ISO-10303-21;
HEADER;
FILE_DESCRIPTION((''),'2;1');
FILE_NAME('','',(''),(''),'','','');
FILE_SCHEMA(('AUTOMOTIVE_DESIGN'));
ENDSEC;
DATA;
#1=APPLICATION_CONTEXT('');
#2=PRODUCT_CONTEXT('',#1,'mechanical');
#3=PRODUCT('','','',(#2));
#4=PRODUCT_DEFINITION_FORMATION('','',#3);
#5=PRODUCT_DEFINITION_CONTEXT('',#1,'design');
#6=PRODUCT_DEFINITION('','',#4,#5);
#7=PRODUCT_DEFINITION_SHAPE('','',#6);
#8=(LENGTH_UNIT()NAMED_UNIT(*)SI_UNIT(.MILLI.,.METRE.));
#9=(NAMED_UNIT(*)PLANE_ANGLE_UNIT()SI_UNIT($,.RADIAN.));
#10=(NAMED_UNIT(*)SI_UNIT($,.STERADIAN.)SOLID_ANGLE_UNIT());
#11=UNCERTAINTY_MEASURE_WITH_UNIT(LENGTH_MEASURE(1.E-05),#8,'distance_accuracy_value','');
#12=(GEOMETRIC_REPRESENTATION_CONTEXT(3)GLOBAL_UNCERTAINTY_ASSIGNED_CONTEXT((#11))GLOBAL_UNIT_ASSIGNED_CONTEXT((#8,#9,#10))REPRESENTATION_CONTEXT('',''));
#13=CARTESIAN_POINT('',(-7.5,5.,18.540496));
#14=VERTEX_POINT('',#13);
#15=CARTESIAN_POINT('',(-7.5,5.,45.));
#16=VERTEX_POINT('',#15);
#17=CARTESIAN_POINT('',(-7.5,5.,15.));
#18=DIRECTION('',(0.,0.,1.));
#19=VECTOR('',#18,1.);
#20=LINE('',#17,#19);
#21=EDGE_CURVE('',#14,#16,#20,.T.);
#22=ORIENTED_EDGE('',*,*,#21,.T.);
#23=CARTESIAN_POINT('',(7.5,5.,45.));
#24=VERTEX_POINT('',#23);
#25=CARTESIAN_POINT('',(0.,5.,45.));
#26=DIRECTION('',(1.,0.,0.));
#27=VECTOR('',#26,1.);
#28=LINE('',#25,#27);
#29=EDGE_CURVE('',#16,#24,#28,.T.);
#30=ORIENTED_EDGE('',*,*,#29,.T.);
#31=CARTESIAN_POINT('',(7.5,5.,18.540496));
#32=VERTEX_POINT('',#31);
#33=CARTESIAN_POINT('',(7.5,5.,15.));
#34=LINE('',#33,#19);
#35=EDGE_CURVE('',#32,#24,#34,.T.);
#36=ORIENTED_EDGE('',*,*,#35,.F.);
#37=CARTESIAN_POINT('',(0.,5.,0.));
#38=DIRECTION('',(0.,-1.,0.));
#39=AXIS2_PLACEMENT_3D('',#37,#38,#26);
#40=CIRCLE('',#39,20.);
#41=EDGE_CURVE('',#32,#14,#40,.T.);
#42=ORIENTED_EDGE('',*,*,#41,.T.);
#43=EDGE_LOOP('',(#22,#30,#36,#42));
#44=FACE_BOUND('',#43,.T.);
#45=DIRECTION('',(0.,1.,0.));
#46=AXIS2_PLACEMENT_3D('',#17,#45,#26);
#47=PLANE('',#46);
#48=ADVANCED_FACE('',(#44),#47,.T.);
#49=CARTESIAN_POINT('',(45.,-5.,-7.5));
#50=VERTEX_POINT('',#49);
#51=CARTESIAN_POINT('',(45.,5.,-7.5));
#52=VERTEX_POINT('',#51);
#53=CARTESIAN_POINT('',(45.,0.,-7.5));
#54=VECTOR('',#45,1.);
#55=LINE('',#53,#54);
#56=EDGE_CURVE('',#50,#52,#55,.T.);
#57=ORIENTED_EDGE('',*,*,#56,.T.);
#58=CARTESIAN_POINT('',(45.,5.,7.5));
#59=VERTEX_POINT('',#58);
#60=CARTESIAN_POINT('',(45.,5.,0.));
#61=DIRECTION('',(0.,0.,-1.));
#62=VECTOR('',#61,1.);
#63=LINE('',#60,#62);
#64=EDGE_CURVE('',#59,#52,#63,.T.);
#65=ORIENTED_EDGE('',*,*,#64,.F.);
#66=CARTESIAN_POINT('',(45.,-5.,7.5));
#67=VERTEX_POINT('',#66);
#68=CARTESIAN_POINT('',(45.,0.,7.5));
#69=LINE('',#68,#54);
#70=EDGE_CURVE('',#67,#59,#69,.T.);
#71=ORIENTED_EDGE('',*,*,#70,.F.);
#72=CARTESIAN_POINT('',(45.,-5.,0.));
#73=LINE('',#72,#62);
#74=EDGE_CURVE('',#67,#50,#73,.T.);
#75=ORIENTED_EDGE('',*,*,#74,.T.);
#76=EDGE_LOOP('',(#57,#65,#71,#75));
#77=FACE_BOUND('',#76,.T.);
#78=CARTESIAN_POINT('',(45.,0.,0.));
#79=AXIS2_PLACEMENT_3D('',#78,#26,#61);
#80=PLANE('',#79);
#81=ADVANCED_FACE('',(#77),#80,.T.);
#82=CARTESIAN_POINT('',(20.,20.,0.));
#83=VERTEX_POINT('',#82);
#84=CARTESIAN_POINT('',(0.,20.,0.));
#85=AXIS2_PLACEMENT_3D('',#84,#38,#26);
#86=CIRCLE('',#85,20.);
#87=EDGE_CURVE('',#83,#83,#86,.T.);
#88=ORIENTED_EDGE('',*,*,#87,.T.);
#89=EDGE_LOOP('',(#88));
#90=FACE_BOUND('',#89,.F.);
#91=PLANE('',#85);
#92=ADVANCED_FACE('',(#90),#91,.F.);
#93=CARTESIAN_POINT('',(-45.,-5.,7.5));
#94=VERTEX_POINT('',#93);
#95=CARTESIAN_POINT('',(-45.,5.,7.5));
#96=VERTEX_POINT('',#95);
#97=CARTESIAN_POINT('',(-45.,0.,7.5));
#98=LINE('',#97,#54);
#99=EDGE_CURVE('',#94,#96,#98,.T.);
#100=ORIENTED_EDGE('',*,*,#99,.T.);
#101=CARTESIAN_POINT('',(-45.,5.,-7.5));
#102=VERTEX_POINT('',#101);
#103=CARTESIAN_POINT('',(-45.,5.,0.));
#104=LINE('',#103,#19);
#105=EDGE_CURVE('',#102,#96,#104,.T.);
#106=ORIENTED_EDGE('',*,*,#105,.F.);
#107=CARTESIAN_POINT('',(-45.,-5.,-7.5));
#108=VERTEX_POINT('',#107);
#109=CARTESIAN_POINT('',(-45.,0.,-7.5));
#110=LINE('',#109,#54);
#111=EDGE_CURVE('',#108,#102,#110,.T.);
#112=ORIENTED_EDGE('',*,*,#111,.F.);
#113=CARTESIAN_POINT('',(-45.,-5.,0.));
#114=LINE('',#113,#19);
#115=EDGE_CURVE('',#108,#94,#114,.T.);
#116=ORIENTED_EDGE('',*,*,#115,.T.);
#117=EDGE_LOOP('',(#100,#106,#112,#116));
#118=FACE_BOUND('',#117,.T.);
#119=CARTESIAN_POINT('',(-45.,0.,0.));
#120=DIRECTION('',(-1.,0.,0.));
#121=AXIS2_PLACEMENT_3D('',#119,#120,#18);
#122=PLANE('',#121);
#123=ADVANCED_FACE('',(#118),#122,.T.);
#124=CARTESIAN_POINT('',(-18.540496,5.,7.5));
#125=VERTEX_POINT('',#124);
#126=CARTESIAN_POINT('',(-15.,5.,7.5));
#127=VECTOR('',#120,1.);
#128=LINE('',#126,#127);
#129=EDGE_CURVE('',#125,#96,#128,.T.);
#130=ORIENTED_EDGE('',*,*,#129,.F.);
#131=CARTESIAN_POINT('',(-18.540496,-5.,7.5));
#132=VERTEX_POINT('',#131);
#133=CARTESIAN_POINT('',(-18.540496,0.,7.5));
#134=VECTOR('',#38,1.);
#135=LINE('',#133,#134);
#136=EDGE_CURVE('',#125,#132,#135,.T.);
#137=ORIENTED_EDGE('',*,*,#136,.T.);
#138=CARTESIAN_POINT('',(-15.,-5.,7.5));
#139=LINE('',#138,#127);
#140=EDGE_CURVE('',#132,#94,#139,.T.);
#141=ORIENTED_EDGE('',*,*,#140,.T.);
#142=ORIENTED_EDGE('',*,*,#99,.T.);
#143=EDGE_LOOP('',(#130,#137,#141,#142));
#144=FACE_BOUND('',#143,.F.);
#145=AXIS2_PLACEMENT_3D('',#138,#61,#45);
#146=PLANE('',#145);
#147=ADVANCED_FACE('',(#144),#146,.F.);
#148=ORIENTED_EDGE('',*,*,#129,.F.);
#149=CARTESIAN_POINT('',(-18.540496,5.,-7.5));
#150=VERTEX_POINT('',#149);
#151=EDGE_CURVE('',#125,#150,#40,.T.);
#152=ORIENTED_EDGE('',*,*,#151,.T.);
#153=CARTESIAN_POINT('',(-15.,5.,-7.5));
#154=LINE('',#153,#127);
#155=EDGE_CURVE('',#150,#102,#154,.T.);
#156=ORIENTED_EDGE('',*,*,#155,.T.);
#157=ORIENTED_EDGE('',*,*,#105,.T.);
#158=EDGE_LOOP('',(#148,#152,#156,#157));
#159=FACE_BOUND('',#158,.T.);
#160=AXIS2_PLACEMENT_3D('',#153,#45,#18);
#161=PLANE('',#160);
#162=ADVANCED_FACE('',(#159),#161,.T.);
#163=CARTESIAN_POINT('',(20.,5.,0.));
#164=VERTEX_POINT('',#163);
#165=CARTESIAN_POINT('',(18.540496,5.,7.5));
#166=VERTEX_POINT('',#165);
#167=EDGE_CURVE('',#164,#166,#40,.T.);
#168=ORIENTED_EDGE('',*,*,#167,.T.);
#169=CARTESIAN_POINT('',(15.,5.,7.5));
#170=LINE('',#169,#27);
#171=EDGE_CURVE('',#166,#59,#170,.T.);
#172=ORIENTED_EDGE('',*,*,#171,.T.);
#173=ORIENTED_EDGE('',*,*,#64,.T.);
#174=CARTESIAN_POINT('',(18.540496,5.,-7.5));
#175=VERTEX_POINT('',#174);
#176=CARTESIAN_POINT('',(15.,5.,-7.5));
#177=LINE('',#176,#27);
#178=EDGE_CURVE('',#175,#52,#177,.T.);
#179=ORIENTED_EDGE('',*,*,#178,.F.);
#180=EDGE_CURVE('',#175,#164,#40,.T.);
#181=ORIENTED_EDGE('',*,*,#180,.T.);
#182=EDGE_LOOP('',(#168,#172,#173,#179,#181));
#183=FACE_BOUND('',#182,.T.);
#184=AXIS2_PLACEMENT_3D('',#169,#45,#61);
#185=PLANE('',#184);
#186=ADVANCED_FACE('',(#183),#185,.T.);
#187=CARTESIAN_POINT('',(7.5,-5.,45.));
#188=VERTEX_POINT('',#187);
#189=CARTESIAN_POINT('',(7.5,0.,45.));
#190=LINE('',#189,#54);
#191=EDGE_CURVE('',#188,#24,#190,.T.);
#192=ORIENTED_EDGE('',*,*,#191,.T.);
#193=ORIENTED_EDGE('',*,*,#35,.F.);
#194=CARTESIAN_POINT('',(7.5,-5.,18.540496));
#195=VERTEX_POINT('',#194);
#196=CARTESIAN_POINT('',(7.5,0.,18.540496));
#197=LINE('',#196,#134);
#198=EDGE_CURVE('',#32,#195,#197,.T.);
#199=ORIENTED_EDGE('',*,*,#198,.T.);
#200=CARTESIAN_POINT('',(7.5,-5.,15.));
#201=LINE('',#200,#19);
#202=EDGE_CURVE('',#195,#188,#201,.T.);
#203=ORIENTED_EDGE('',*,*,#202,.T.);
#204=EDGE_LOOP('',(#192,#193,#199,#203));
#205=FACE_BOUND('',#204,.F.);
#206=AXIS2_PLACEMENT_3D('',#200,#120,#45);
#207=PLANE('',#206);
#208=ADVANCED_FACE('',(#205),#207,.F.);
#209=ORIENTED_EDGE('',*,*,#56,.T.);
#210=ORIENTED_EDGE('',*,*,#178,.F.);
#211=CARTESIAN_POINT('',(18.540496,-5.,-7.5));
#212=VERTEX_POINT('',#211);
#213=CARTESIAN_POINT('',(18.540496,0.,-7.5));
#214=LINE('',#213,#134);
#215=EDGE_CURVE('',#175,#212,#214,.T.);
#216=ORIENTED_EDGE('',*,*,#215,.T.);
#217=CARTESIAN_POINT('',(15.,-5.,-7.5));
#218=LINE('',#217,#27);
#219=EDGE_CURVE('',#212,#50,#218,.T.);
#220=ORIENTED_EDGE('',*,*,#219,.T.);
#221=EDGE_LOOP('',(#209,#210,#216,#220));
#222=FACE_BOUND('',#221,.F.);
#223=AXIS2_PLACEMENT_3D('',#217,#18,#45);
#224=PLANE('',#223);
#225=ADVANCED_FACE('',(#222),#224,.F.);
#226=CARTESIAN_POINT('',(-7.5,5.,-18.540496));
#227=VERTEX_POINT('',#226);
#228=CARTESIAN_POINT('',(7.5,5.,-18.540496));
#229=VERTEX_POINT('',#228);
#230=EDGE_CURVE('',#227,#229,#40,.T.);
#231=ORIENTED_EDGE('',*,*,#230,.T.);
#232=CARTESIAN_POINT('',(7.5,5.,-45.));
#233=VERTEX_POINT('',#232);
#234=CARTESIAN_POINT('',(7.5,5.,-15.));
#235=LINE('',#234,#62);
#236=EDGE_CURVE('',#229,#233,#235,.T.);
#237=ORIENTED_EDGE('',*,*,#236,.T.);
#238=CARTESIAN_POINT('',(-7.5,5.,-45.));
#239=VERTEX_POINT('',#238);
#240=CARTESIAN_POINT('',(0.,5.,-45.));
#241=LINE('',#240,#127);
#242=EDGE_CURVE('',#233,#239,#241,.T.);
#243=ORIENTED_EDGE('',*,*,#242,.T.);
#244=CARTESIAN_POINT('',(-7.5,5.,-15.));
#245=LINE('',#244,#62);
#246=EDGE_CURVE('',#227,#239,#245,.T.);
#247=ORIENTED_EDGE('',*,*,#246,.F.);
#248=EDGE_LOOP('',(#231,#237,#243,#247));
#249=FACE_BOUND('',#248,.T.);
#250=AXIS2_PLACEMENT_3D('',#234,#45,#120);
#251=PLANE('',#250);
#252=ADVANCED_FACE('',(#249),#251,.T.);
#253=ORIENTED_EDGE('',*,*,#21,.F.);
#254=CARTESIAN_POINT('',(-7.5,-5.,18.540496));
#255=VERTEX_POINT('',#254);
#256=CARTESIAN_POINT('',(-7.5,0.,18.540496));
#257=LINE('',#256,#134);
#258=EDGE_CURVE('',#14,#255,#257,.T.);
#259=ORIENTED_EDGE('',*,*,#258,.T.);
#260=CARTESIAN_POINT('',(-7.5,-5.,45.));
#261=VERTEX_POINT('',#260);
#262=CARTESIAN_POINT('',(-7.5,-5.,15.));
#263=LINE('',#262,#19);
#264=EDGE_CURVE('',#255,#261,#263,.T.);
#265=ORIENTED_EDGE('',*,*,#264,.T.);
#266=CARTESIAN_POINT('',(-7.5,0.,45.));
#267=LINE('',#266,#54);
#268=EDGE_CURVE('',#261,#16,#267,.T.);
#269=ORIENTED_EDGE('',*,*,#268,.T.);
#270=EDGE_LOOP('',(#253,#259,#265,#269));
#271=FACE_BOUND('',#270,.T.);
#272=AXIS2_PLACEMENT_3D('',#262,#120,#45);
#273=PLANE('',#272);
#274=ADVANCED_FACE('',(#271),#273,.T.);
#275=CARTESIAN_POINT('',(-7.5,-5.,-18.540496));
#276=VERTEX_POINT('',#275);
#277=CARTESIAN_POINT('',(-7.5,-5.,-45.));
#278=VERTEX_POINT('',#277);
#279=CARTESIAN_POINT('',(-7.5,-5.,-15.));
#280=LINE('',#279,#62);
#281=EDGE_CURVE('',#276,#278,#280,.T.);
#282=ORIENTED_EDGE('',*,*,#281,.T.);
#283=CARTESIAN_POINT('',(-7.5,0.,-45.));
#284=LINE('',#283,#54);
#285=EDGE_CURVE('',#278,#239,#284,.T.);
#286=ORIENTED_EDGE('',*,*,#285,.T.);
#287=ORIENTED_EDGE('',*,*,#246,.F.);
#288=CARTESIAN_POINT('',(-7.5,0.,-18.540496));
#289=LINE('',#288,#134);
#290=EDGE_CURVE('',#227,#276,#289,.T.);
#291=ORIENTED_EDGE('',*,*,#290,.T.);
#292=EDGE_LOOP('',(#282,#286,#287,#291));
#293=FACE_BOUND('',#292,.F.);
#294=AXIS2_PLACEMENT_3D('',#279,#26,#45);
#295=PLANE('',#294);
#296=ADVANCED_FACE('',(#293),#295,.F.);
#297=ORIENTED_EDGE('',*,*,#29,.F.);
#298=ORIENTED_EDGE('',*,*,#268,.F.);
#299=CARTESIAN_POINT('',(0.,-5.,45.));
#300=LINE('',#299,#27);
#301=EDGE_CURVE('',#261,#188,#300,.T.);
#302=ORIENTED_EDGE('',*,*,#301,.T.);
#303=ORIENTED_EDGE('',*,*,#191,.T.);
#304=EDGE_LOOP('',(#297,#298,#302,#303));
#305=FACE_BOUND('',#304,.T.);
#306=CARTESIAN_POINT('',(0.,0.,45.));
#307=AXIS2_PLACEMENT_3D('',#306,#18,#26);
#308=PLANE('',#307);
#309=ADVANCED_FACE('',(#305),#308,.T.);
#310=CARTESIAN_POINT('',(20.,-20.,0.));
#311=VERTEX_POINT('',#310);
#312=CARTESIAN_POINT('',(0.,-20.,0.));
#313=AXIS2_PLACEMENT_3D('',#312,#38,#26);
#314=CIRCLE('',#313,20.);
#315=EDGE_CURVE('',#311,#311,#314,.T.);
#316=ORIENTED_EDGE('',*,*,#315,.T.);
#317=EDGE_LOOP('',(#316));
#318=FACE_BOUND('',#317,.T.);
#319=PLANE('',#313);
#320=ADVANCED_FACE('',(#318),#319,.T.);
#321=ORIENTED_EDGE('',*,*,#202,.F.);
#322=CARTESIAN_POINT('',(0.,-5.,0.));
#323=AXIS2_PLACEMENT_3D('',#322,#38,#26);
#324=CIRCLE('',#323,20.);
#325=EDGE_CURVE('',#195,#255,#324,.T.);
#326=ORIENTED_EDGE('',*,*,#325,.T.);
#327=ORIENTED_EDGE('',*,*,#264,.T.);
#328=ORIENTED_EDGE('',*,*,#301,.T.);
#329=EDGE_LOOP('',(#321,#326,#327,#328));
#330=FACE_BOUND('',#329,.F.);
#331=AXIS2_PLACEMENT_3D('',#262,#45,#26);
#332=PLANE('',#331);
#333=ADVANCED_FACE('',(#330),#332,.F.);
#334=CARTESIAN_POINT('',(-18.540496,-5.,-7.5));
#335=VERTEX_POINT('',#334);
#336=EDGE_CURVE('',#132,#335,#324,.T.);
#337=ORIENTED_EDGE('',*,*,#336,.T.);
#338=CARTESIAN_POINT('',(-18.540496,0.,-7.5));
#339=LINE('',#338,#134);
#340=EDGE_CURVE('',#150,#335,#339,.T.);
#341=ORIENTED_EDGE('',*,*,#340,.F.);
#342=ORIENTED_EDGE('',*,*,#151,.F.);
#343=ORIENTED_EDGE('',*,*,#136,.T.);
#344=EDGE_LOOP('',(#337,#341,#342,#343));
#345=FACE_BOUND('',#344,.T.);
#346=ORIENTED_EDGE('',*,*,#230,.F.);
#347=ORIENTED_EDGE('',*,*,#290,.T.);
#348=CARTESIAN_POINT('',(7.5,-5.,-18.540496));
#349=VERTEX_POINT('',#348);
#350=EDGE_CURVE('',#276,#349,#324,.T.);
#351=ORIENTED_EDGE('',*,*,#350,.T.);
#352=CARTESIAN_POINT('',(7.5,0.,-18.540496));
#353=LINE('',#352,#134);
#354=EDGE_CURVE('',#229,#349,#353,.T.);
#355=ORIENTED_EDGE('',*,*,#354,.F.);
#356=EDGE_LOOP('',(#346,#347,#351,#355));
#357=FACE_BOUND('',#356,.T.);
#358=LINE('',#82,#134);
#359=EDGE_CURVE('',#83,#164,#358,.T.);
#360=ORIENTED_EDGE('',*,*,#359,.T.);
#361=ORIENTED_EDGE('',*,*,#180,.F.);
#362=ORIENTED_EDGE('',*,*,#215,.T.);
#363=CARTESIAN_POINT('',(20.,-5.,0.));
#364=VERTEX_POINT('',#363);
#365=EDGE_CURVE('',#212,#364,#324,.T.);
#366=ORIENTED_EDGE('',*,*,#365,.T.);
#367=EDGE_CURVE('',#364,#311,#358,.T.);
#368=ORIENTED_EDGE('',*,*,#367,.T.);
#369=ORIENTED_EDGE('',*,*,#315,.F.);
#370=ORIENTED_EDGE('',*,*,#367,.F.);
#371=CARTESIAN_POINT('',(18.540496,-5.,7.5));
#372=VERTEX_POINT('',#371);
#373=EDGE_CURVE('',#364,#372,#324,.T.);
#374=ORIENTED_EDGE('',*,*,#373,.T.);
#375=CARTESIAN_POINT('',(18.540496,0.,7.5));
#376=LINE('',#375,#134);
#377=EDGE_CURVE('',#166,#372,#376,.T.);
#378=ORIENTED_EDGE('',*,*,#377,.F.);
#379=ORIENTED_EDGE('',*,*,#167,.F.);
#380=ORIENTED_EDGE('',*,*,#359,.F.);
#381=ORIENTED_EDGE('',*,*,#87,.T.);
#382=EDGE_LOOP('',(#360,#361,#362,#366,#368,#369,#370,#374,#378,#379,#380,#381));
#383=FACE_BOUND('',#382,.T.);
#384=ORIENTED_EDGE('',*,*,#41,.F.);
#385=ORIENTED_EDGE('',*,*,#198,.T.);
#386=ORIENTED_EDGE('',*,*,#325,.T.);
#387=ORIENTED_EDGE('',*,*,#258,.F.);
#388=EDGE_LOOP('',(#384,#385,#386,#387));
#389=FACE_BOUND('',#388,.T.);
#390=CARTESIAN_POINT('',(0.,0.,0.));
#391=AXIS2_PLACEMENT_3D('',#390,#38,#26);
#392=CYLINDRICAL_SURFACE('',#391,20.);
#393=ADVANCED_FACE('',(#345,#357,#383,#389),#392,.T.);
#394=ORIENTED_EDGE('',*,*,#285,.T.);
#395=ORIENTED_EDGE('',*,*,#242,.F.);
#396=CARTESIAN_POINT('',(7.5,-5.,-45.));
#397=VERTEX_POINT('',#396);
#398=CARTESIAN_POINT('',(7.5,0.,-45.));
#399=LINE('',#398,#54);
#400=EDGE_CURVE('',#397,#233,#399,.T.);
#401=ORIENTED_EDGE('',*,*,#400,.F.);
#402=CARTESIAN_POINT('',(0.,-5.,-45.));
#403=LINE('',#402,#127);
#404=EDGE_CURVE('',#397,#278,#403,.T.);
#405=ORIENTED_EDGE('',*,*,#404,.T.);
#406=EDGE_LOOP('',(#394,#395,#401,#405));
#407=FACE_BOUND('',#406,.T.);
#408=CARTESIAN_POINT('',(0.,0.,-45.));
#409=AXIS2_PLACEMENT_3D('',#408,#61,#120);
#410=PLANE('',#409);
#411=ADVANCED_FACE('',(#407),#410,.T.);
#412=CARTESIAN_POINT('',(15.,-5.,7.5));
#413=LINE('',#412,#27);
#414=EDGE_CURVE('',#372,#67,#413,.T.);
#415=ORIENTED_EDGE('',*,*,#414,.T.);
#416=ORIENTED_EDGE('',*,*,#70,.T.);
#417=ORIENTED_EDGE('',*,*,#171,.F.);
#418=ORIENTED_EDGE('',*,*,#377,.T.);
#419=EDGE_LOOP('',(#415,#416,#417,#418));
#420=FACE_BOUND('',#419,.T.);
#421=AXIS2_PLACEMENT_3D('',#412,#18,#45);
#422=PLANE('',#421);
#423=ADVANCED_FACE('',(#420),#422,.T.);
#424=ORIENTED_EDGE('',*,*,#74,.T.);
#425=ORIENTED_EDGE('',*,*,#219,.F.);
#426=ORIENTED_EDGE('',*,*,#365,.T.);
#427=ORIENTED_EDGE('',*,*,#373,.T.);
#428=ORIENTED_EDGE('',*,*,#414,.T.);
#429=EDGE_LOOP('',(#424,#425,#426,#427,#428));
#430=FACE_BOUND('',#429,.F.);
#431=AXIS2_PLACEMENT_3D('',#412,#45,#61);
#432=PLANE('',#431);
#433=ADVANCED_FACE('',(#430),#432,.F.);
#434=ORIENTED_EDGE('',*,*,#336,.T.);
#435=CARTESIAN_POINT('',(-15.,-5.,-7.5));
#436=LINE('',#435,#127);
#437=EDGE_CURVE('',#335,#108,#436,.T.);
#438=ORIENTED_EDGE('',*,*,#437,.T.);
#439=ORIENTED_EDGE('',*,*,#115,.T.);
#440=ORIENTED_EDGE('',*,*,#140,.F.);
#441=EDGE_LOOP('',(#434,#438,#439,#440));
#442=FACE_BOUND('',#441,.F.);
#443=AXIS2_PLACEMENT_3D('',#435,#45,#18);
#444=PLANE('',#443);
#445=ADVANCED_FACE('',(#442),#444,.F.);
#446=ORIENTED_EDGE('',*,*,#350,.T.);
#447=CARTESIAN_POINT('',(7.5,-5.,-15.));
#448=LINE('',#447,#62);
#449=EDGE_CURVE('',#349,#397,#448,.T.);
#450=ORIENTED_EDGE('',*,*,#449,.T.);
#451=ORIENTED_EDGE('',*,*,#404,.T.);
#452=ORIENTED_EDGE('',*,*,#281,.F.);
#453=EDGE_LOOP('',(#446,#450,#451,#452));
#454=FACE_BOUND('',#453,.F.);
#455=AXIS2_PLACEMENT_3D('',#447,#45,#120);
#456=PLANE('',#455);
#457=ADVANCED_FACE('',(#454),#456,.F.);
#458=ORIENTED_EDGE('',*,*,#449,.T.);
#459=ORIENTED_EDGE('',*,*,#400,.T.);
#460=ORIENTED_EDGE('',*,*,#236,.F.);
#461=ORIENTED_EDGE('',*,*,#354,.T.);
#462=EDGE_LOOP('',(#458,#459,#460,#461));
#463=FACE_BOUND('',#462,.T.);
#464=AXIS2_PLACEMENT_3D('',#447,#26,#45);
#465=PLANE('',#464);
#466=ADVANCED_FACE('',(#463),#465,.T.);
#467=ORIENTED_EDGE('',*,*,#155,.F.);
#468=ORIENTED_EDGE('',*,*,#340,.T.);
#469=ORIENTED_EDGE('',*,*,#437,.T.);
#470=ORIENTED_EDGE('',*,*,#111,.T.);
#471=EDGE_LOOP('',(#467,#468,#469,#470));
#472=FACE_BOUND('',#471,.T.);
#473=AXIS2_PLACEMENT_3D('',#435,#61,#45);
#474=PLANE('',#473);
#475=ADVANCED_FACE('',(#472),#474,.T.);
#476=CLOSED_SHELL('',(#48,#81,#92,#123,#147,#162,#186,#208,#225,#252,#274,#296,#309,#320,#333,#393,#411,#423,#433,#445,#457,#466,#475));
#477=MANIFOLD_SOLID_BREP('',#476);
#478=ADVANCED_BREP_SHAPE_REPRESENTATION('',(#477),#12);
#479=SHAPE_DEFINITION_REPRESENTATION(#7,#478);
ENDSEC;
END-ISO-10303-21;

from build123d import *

# Parameters (mm, degrees)
F0_R            = 20
F1_DEPTH        = 20
F3_W            = 15
F3_H            = 10
F4_DEPTH        = 30
F4_COPIES_COUNT = 4


# Not quite as in the source:
# - a pattern or mirror of a feature is missing from the dataset's text; its kind, count and spacing are read off the source's solid


with BuildPart() as f1:
    # F0 (on Front) → F1 (new body, symmetric)
    with BuildSketch(Plane.XZ):
        Circle(F0_R)
    extrude(amount=F1_DEPTH, both=True)

    # F3 (on offset) → F4 (join)
    with BuildSketch(Plane.XY.offset(15)):
        Rectangle(F3_W, F3_H)
    f4 = extrude(amount=F4_DEPTH)

    # F4_copies: F4 ×4 about axis
    f4_copies_axis = Axis((0, 0, 0), (0, 1, 0))
    for i in range(1, F4_COPIES_COUNT):
        add(f4.rotate(f4_copies_axis, i * 360 / F4_COPIES_COUNT))


solid = f1.part
